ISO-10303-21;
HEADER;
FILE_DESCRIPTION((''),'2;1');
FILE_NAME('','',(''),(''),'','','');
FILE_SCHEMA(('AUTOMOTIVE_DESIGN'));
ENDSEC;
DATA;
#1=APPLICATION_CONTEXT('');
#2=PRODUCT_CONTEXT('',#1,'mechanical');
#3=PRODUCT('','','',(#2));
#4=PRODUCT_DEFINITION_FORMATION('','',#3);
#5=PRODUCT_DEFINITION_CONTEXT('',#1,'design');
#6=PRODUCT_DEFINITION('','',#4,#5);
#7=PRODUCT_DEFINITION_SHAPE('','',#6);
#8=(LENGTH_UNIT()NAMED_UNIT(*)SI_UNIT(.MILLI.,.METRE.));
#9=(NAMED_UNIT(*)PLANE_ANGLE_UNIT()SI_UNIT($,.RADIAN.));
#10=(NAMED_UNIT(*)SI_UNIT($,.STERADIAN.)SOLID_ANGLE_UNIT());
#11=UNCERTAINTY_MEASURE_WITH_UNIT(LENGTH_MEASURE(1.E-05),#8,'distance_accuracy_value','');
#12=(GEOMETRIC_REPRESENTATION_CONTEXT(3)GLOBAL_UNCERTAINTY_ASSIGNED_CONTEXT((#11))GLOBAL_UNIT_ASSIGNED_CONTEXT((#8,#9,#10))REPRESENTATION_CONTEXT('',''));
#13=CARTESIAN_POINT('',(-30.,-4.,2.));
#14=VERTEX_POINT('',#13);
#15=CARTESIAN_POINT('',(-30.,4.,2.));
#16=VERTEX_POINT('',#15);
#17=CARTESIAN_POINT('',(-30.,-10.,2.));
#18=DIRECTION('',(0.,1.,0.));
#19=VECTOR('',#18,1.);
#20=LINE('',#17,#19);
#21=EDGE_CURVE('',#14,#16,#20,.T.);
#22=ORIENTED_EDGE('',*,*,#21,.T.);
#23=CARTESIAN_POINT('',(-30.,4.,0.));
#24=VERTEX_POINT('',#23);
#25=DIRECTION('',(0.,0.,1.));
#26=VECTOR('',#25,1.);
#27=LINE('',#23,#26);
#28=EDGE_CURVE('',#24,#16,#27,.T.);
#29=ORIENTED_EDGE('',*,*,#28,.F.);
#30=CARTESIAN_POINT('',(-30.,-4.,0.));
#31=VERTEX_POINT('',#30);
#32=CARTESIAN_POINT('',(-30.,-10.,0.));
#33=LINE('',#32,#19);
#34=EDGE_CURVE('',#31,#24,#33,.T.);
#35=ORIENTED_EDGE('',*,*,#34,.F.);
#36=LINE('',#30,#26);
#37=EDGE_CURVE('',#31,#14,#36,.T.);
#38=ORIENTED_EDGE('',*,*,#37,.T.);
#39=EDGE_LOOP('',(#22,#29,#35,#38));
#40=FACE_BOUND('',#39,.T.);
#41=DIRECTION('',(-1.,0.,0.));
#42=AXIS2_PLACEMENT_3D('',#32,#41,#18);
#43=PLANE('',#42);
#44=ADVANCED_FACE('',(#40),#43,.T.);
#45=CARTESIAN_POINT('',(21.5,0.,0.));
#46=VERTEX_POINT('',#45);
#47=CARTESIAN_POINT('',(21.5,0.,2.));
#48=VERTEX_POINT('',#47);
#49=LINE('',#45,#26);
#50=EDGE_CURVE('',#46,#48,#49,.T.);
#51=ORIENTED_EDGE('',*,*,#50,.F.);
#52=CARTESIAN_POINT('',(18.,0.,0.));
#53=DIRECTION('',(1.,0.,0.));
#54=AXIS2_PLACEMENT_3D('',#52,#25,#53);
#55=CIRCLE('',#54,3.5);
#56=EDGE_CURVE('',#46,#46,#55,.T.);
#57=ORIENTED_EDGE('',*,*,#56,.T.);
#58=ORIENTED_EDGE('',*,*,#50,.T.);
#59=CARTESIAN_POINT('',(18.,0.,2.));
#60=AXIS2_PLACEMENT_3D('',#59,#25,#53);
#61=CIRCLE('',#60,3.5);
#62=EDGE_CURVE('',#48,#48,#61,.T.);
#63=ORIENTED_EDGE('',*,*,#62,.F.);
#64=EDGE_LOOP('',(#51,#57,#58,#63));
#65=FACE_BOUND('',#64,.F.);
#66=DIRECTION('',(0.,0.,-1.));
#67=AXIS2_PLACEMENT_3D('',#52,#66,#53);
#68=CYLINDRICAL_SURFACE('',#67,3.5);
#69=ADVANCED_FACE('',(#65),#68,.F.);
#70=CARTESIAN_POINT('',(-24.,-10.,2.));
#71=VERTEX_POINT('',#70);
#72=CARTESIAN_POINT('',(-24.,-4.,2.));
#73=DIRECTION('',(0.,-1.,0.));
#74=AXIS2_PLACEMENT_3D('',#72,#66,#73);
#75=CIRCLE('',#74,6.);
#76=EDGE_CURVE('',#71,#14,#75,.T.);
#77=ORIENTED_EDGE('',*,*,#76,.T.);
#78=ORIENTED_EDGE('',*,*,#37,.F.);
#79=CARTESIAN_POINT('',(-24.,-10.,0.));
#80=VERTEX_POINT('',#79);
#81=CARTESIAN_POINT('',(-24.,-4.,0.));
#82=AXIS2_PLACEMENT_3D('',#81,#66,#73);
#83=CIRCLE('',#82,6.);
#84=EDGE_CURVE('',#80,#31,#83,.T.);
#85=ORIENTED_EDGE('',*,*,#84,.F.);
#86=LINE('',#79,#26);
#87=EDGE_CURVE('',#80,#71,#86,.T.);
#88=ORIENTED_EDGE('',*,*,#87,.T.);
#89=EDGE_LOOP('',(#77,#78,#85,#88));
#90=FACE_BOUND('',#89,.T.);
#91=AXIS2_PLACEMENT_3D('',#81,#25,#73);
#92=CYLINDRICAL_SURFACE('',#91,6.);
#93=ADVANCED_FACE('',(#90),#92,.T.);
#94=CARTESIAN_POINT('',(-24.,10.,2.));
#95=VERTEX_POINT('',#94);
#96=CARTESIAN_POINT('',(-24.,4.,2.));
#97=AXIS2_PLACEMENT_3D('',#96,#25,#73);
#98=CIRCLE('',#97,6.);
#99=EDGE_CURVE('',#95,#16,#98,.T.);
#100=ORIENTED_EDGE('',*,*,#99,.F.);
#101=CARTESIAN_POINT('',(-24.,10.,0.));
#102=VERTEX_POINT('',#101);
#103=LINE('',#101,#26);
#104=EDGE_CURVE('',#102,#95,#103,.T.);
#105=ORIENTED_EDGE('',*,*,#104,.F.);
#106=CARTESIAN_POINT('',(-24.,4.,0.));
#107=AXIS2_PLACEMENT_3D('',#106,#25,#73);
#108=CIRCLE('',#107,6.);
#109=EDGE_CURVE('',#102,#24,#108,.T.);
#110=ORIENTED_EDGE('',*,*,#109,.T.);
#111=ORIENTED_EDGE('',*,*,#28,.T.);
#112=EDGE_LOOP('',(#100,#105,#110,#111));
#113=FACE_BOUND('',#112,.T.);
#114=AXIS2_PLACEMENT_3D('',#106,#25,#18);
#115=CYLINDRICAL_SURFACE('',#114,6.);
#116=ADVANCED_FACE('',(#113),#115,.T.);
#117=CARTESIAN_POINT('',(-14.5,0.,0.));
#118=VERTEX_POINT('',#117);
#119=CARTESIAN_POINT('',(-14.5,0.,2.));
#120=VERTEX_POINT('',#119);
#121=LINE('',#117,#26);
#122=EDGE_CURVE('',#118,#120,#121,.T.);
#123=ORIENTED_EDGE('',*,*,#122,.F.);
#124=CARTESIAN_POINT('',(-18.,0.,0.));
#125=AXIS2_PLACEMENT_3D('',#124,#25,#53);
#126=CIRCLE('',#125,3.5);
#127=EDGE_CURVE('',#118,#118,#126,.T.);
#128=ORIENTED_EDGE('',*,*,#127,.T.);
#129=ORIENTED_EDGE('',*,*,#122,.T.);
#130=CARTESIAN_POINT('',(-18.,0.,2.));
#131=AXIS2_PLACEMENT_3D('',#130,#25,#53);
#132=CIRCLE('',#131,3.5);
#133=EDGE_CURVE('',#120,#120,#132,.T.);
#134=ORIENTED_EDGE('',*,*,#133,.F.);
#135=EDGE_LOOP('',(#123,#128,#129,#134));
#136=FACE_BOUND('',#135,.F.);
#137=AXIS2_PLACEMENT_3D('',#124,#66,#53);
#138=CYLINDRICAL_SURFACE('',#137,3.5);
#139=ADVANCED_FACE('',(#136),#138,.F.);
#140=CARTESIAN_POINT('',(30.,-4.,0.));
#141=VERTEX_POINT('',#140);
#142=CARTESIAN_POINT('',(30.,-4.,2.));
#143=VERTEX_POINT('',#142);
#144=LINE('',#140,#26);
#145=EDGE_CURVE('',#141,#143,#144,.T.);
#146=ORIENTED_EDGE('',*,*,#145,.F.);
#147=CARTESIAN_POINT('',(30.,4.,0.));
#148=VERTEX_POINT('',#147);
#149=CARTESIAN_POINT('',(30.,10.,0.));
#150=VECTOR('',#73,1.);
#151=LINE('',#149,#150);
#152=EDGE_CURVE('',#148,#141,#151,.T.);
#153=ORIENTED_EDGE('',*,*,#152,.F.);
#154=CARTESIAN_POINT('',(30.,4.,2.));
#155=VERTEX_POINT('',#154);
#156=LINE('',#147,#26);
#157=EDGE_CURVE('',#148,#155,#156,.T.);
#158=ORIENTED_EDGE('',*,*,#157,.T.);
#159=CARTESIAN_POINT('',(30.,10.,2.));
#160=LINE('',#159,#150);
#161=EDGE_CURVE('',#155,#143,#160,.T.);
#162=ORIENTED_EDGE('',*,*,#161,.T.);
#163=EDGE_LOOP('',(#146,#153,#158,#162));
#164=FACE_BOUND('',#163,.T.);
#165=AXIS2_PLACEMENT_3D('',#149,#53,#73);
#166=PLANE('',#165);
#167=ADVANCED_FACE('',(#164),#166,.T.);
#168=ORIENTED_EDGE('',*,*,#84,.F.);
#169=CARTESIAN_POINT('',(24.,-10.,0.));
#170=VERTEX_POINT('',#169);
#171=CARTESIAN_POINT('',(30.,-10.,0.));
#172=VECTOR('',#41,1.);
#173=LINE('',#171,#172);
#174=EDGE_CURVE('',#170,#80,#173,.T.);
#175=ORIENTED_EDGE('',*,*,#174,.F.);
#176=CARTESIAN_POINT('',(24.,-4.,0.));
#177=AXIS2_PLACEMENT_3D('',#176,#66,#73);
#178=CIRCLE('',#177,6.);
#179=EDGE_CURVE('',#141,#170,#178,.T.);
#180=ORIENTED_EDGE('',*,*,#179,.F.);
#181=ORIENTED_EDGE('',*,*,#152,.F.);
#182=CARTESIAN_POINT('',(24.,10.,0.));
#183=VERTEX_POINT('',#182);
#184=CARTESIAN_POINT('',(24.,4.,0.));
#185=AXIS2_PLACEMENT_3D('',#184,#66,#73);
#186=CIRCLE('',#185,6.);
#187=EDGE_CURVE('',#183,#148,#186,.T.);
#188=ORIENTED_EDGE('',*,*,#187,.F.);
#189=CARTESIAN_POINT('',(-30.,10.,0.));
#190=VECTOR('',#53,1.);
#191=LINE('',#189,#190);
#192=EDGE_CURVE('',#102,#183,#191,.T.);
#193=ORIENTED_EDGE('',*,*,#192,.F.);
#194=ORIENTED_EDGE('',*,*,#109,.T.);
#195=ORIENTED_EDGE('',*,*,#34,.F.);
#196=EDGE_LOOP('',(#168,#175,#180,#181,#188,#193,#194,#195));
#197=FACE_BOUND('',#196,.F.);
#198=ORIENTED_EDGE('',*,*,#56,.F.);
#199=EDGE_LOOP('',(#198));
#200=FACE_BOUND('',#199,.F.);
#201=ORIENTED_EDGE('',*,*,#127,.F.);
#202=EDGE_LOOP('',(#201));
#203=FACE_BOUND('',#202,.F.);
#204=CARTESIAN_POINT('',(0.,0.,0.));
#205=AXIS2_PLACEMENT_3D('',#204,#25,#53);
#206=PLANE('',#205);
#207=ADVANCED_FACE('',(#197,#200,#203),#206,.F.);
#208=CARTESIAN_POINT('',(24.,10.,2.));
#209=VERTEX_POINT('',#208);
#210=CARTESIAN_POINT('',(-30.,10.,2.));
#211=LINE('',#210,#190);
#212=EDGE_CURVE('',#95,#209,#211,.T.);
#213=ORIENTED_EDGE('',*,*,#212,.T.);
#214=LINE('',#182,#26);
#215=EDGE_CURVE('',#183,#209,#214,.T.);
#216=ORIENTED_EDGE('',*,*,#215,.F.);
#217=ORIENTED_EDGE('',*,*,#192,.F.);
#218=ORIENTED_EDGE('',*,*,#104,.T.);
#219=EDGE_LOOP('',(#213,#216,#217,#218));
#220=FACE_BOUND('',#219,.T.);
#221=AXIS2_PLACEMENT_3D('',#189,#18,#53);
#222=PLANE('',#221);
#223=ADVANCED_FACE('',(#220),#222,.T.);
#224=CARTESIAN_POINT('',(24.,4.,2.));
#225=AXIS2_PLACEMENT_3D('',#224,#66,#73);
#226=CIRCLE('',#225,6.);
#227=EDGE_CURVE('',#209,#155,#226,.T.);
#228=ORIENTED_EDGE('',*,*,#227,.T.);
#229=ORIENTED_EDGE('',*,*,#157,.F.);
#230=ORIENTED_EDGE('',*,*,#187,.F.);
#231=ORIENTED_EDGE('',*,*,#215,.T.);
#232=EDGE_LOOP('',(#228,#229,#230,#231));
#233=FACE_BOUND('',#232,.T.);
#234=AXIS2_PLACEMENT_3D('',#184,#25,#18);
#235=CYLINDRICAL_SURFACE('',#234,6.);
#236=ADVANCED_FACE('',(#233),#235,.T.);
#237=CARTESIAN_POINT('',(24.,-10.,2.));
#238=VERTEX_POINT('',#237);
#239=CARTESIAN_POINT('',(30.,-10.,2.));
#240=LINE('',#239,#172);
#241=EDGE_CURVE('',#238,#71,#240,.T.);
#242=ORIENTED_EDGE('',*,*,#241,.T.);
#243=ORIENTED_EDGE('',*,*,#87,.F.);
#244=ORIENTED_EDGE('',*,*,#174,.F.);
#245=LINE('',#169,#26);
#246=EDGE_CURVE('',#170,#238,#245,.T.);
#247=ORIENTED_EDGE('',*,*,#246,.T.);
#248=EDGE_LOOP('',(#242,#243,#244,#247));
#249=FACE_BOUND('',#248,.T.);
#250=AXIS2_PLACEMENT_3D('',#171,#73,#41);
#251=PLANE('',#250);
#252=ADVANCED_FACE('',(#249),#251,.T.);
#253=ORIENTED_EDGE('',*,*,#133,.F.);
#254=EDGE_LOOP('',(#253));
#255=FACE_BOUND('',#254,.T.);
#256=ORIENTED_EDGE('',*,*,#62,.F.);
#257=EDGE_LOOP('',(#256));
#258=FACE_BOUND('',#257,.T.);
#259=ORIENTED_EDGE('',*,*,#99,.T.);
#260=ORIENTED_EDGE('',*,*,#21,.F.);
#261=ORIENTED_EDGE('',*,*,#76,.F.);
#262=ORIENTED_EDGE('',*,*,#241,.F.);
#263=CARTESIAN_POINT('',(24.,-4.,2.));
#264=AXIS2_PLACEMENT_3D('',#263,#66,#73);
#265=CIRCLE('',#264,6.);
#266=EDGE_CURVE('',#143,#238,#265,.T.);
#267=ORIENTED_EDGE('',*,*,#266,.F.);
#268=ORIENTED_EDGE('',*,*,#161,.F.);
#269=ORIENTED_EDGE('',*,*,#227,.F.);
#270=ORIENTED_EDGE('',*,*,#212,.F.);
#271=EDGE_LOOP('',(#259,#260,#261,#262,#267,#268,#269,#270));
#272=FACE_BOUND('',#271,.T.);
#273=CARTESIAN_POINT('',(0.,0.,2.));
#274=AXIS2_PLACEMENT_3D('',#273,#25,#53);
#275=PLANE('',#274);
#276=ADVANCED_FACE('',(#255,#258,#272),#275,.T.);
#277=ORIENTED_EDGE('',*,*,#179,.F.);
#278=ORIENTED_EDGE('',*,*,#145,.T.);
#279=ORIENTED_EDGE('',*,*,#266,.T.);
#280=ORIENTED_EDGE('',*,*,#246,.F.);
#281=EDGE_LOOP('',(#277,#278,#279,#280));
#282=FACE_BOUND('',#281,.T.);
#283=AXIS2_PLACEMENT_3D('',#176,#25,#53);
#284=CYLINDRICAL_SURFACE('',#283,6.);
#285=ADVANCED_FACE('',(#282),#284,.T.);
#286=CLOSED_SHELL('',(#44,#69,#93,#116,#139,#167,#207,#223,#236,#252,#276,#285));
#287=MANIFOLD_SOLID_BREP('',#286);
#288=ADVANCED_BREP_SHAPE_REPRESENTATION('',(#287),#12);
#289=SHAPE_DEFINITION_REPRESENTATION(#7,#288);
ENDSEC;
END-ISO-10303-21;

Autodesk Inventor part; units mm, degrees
ref_plane "YZ Plane" through (0, 0, 0) normal (1, 0, 0) x (0, 1, 0)
ref_plane "XZ Plane" through (0, 0, 0) normal (0, 1, 0) x (-1, 0, 0)
ref_plane "XY Plane" through (0, 0, 0) normal (0, 0, 1) x (1, 0, 0)
sketch "Sketch1" plane through (0, 0, 0) normal (0, 0, 1) x (1, 0, 0)
  line L0 (-30, 10) -> (30, 10)
  line L1 (30, 10) -> (30, -10)
  line L2 (30, -10) -> (-30, -10)
  line L3 (-30, -10) -> (-30, 10)
  line L4 (-30, 10) -> (30, -10) construction
  line L5 (30, 10) -> (-30, -10) construction
  circle A0 centre (18, 0) radius 3.5
  circle A1 centre (-18, 0) radius 3.5
  line L6 (0, 10) -> (0, -10) construction
  point P0 (0, 0)
  point P1 (0, 0)
  dimension "d0" = 60
  dimension "d1" = 20
  dimension "d2" = 7
  dimension "d3" = 36
extrude "Plate1" add sketch "Sketch1" along normal blind 2
fillet "Corner Round1" radius 6 4 edges at (-30, 10, 1) (-30, -10, 1) (30, 10, 1) (30, -10, 1)
equation "\"d4\" = Thickness"
equation "\"BendRadius\" = Thickness"
equation "\"BendReliefWidth\" = Thickness"
equation "\"BendReliefDepth\" = 0.5 * Thickness"
equation "\"CornerReliefSize\" = 4 * Thickness"
equation "\"MinimumRemnant\" = 2 * Thickness"
equation "\"TransitionRadius\" = BendRadius"
equation "\"JacobiRadiusSize\" = BendRadius"
equation "\"GapSize\" = Thickness"
equation "\"Thickness\" = 2"
properties part number "motor pillar 1"
